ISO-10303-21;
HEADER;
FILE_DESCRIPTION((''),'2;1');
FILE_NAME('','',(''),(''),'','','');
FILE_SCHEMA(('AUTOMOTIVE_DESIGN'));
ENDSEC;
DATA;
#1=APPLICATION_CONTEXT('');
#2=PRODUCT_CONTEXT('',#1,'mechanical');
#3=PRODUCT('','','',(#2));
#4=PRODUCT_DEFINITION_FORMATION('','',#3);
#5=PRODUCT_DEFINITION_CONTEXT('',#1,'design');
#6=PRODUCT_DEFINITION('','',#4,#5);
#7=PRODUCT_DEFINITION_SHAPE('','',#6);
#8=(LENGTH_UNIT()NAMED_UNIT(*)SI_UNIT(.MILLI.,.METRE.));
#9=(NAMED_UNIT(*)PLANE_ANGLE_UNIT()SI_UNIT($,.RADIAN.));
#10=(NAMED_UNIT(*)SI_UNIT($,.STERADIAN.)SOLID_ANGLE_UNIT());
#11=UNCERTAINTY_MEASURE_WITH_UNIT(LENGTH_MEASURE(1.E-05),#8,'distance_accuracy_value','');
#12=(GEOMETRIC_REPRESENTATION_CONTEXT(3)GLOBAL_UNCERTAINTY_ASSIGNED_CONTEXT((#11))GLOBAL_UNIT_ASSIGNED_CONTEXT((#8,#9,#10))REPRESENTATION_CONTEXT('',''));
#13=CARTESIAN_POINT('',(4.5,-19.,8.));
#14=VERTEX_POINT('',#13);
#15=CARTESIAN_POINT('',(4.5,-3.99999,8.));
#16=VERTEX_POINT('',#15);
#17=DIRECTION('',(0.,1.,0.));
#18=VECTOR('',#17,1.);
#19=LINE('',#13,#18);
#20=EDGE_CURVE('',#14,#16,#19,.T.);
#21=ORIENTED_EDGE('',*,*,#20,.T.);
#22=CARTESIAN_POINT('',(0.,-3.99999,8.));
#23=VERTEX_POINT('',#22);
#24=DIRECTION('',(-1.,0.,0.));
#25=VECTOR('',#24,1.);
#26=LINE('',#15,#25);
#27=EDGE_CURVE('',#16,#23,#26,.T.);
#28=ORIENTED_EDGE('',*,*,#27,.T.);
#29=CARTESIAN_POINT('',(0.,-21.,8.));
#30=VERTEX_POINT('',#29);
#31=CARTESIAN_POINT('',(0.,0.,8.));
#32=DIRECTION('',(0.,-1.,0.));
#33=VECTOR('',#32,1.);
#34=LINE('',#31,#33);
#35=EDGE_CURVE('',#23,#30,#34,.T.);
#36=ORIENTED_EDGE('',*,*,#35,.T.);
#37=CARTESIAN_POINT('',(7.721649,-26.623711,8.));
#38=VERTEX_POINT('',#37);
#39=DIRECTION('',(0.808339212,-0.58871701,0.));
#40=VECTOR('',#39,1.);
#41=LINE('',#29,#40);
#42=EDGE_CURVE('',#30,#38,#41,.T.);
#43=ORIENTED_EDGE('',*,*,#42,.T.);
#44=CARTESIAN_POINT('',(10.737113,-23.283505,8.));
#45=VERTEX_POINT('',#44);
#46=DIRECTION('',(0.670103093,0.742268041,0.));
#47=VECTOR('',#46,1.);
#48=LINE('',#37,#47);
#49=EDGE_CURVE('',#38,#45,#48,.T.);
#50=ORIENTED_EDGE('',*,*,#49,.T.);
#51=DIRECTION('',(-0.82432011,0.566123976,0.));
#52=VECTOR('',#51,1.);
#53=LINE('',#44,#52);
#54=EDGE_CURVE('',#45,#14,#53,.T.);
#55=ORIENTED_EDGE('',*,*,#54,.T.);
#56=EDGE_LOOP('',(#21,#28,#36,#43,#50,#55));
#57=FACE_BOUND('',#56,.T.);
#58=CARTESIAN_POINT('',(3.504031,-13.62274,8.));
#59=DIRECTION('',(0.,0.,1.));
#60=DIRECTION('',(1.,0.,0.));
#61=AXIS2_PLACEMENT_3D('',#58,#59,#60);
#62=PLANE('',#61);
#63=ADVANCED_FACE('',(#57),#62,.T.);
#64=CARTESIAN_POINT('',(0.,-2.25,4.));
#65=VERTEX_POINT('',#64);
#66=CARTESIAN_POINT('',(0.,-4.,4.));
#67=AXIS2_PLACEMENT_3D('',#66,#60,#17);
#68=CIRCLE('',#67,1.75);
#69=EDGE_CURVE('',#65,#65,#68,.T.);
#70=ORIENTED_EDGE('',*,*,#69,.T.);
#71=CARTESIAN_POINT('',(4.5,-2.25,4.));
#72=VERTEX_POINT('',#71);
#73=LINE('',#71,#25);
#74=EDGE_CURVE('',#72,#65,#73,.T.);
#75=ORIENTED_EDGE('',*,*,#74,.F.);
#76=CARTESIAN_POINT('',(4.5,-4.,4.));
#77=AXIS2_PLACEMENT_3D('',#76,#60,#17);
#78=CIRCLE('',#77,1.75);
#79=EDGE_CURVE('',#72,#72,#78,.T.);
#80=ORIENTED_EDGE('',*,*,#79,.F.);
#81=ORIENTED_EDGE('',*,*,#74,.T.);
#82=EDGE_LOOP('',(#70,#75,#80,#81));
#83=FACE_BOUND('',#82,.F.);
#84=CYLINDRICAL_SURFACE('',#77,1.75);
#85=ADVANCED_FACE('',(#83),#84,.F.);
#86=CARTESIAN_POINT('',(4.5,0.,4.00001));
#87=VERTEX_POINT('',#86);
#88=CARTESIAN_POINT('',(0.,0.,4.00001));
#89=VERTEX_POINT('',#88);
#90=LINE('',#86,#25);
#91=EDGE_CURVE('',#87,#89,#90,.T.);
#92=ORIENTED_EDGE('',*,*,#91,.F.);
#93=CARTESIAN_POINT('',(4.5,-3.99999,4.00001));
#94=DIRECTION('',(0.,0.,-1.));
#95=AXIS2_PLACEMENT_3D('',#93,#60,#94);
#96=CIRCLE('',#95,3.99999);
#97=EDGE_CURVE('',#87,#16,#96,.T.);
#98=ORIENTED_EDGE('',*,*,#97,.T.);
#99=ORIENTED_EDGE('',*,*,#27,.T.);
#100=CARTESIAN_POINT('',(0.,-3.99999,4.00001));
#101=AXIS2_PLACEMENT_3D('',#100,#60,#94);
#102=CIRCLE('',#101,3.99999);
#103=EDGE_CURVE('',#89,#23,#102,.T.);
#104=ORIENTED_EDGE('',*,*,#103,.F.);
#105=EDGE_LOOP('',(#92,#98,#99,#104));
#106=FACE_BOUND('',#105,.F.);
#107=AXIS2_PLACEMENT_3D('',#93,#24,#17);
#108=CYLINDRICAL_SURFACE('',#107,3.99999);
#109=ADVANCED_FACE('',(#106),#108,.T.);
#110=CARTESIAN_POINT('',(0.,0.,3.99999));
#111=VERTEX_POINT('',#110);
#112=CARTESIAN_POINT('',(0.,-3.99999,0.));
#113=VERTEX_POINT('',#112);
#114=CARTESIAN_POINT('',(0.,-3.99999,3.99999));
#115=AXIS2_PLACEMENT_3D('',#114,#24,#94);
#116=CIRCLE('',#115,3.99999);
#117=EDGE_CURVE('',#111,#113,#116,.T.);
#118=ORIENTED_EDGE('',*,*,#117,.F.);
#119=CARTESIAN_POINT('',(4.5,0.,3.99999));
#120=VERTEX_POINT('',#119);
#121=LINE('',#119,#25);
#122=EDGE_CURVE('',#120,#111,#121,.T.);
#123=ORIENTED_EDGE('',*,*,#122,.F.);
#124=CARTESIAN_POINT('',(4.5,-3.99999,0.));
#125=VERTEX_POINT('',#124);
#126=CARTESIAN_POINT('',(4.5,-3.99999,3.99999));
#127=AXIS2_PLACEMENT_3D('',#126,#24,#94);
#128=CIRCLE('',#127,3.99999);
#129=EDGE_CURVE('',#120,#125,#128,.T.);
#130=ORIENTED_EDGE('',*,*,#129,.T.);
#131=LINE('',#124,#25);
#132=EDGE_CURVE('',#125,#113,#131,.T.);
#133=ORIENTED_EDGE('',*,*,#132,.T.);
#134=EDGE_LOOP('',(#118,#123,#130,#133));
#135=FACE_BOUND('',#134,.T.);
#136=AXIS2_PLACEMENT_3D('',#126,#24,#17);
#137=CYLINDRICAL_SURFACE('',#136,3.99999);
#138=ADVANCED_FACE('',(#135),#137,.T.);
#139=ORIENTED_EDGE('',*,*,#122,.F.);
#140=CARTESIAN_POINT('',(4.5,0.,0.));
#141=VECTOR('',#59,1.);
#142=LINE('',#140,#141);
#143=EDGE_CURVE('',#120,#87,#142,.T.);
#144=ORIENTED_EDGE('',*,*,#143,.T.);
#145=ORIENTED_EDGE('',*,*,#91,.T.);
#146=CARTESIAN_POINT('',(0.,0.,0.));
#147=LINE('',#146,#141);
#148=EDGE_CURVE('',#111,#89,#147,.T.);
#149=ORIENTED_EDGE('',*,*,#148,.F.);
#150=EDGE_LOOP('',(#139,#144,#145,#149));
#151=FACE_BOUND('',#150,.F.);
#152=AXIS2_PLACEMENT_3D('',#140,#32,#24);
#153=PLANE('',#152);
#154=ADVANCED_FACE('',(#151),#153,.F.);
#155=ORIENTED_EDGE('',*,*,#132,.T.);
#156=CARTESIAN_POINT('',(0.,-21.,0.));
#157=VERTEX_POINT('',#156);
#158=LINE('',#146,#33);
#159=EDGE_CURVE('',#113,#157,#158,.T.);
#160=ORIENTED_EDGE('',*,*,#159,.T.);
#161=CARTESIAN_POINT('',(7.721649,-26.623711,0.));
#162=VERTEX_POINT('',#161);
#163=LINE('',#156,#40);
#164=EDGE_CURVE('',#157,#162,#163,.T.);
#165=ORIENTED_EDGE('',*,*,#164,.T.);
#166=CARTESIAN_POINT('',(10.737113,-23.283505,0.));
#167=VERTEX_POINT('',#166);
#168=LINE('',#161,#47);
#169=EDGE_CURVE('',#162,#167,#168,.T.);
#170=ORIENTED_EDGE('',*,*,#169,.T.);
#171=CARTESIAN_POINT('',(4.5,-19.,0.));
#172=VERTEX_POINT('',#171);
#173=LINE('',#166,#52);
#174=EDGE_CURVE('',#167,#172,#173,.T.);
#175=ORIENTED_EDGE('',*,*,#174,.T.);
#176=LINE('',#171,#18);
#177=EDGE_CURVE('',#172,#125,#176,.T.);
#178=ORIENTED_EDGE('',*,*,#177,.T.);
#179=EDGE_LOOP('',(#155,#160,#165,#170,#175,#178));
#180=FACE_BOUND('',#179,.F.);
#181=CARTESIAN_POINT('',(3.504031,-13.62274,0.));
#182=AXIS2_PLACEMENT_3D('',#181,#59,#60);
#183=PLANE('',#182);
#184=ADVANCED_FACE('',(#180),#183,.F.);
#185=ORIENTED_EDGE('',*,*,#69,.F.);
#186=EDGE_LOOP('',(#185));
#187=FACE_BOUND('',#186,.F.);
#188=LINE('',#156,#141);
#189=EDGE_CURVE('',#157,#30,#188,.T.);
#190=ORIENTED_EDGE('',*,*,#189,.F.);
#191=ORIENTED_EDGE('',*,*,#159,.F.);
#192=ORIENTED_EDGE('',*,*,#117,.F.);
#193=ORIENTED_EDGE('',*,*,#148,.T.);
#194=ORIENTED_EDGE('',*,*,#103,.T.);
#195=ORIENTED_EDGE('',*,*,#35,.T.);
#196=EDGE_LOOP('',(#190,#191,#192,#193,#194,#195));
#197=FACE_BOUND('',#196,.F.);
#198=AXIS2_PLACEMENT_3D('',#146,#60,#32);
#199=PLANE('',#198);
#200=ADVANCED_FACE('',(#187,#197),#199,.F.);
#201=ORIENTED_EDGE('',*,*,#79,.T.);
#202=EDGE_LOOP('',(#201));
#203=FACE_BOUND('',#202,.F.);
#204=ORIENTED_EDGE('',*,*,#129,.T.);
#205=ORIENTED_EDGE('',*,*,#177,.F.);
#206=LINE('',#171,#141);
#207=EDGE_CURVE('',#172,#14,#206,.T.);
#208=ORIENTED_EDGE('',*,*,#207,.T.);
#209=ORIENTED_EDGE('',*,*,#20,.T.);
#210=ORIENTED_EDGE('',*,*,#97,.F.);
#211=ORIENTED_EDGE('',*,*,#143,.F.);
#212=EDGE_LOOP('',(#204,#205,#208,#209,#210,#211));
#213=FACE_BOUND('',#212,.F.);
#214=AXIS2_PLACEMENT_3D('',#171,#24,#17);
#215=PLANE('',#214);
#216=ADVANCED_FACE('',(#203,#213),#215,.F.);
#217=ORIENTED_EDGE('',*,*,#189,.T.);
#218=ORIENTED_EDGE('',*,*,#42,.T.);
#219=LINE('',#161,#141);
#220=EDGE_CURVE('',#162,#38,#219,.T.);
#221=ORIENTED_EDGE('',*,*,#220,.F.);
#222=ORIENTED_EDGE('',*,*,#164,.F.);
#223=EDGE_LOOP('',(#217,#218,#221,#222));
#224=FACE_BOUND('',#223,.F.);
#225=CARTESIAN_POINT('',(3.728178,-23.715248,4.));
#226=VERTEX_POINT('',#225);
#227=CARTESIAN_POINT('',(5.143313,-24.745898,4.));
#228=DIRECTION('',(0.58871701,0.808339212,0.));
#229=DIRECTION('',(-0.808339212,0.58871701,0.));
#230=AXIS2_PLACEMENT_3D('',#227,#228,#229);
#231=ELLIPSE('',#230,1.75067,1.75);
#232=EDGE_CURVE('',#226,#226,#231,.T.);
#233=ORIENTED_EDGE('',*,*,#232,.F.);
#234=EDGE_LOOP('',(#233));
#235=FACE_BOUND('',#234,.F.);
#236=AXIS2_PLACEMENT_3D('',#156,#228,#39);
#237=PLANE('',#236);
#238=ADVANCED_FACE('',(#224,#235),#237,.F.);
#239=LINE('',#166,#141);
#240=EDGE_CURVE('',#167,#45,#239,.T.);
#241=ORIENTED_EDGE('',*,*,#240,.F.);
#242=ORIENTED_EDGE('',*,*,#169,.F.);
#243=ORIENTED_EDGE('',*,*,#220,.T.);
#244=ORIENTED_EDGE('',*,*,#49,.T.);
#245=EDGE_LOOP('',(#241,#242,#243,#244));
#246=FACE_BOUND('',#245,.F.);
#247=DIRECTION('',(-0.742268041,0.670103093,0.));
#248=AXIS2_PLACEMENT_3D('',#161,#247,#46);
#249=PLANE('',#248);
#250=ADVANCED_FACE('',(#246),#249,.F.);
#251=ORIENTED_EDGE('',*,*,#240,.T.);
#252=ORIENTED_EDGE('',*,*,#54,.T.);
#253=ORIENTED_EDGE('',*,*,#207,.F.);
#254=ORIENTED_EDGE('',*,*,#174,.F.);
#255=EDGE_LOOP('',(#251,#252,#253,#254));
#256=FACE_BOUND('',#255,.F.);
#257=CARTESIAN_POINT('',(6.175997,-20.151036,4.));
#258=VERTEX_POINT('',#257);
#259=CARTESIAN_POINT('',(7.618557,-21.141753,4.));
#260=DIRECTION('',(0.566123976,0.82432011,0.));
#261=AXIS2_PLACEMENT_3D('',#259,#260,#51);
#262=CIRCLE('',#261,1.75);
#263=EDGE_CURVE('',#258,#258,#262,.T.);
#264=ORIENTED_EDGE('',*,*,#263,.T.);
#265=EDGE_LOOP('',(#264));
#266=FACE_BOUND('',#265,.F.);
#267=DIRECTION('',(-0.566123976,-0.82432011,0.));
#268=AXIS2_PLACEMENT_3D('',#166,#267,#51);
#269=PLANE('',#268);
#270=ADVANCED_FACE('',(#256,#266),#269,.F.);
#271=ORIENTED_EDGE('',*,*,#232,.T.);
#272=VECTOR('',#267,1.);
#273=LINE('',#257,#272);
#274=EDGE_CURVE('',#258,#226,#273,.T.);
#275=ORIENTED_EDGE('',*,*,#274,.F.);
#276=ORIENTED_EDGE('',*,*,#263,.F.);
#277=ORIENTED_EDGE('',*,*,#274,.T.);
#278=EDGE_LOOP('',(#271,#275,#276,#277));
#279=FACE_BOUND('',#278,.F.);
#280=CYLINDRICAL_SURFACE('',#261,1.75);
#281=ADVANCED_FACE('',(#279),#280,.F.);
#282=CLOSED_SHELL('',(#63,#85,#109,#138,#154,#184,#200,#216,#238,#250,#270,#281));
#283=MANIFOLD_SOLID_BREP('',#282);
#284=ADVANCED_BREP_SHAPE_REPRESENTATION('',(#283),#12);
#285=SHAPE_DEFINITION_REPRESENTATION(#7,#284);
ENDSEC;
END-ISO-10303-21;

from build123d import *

# Parameters (mm, degrees)
F1_DEPTH = 8
F2_R     = 3.99999
F3_R     = 1.75
F4_DEPTH = 4.5
F5_R     = 1.75
F6_DEPTH = 4.84


# Not quite as in the source:
# - a fillet or chamfer is up to 0.001 mm smaller than in the source, because OpenCascade refuses the exact size
# - a feature names something its author has since deleted; it is built from what else it names


with BuildPart() as f1:
    # F0 (on Top) → F1 (new body)
    with BuildSketch(Plane.XY):
        Polygon((4.5, 0), (0, 0), (0, -21), (7.7216494845, -26.6237113402), (10.7371134021, -23.2835051546), (4.5, -19), align=None)
    extrude(amount=F1_DEPTH)

    # F2 (radius 4 in the source; OpenCascade refuses exactly that, so slightly less here)
    f2_edges = [f1.edges().sort_by_distance(p)[0] for p in [
        (2.25, 0, 8),
        (2.25, 0, 0),
    ]]
    fillet(f2_edges, radius=F2_R)

    # F3 (on face) → F4 (cut)
    with BuildSketch(Plane.YZ.offset(4.5)):
        with Locations((-4, 4)):
            Circle(F3_R)
    extrude(amount=-F4_DEPTH, mode=Mode.SUBTRACT)

    # F5 (on face) → F6 (cut)
    with BuildSketch(Plane(origin=(-7.4244465835, -10.8105660241, 0), x_dir=(-0.8243201098, 0.5661239763, 0), z_dir=(0.5661239763, 0.8243201098, 0))):
        with Locations((-18.248982531, 4)):
            Circle(F5_R)
    extrude(amount=-F6_DEPTH, mode=Mode.SUBTRACT)


solid = f1.part
